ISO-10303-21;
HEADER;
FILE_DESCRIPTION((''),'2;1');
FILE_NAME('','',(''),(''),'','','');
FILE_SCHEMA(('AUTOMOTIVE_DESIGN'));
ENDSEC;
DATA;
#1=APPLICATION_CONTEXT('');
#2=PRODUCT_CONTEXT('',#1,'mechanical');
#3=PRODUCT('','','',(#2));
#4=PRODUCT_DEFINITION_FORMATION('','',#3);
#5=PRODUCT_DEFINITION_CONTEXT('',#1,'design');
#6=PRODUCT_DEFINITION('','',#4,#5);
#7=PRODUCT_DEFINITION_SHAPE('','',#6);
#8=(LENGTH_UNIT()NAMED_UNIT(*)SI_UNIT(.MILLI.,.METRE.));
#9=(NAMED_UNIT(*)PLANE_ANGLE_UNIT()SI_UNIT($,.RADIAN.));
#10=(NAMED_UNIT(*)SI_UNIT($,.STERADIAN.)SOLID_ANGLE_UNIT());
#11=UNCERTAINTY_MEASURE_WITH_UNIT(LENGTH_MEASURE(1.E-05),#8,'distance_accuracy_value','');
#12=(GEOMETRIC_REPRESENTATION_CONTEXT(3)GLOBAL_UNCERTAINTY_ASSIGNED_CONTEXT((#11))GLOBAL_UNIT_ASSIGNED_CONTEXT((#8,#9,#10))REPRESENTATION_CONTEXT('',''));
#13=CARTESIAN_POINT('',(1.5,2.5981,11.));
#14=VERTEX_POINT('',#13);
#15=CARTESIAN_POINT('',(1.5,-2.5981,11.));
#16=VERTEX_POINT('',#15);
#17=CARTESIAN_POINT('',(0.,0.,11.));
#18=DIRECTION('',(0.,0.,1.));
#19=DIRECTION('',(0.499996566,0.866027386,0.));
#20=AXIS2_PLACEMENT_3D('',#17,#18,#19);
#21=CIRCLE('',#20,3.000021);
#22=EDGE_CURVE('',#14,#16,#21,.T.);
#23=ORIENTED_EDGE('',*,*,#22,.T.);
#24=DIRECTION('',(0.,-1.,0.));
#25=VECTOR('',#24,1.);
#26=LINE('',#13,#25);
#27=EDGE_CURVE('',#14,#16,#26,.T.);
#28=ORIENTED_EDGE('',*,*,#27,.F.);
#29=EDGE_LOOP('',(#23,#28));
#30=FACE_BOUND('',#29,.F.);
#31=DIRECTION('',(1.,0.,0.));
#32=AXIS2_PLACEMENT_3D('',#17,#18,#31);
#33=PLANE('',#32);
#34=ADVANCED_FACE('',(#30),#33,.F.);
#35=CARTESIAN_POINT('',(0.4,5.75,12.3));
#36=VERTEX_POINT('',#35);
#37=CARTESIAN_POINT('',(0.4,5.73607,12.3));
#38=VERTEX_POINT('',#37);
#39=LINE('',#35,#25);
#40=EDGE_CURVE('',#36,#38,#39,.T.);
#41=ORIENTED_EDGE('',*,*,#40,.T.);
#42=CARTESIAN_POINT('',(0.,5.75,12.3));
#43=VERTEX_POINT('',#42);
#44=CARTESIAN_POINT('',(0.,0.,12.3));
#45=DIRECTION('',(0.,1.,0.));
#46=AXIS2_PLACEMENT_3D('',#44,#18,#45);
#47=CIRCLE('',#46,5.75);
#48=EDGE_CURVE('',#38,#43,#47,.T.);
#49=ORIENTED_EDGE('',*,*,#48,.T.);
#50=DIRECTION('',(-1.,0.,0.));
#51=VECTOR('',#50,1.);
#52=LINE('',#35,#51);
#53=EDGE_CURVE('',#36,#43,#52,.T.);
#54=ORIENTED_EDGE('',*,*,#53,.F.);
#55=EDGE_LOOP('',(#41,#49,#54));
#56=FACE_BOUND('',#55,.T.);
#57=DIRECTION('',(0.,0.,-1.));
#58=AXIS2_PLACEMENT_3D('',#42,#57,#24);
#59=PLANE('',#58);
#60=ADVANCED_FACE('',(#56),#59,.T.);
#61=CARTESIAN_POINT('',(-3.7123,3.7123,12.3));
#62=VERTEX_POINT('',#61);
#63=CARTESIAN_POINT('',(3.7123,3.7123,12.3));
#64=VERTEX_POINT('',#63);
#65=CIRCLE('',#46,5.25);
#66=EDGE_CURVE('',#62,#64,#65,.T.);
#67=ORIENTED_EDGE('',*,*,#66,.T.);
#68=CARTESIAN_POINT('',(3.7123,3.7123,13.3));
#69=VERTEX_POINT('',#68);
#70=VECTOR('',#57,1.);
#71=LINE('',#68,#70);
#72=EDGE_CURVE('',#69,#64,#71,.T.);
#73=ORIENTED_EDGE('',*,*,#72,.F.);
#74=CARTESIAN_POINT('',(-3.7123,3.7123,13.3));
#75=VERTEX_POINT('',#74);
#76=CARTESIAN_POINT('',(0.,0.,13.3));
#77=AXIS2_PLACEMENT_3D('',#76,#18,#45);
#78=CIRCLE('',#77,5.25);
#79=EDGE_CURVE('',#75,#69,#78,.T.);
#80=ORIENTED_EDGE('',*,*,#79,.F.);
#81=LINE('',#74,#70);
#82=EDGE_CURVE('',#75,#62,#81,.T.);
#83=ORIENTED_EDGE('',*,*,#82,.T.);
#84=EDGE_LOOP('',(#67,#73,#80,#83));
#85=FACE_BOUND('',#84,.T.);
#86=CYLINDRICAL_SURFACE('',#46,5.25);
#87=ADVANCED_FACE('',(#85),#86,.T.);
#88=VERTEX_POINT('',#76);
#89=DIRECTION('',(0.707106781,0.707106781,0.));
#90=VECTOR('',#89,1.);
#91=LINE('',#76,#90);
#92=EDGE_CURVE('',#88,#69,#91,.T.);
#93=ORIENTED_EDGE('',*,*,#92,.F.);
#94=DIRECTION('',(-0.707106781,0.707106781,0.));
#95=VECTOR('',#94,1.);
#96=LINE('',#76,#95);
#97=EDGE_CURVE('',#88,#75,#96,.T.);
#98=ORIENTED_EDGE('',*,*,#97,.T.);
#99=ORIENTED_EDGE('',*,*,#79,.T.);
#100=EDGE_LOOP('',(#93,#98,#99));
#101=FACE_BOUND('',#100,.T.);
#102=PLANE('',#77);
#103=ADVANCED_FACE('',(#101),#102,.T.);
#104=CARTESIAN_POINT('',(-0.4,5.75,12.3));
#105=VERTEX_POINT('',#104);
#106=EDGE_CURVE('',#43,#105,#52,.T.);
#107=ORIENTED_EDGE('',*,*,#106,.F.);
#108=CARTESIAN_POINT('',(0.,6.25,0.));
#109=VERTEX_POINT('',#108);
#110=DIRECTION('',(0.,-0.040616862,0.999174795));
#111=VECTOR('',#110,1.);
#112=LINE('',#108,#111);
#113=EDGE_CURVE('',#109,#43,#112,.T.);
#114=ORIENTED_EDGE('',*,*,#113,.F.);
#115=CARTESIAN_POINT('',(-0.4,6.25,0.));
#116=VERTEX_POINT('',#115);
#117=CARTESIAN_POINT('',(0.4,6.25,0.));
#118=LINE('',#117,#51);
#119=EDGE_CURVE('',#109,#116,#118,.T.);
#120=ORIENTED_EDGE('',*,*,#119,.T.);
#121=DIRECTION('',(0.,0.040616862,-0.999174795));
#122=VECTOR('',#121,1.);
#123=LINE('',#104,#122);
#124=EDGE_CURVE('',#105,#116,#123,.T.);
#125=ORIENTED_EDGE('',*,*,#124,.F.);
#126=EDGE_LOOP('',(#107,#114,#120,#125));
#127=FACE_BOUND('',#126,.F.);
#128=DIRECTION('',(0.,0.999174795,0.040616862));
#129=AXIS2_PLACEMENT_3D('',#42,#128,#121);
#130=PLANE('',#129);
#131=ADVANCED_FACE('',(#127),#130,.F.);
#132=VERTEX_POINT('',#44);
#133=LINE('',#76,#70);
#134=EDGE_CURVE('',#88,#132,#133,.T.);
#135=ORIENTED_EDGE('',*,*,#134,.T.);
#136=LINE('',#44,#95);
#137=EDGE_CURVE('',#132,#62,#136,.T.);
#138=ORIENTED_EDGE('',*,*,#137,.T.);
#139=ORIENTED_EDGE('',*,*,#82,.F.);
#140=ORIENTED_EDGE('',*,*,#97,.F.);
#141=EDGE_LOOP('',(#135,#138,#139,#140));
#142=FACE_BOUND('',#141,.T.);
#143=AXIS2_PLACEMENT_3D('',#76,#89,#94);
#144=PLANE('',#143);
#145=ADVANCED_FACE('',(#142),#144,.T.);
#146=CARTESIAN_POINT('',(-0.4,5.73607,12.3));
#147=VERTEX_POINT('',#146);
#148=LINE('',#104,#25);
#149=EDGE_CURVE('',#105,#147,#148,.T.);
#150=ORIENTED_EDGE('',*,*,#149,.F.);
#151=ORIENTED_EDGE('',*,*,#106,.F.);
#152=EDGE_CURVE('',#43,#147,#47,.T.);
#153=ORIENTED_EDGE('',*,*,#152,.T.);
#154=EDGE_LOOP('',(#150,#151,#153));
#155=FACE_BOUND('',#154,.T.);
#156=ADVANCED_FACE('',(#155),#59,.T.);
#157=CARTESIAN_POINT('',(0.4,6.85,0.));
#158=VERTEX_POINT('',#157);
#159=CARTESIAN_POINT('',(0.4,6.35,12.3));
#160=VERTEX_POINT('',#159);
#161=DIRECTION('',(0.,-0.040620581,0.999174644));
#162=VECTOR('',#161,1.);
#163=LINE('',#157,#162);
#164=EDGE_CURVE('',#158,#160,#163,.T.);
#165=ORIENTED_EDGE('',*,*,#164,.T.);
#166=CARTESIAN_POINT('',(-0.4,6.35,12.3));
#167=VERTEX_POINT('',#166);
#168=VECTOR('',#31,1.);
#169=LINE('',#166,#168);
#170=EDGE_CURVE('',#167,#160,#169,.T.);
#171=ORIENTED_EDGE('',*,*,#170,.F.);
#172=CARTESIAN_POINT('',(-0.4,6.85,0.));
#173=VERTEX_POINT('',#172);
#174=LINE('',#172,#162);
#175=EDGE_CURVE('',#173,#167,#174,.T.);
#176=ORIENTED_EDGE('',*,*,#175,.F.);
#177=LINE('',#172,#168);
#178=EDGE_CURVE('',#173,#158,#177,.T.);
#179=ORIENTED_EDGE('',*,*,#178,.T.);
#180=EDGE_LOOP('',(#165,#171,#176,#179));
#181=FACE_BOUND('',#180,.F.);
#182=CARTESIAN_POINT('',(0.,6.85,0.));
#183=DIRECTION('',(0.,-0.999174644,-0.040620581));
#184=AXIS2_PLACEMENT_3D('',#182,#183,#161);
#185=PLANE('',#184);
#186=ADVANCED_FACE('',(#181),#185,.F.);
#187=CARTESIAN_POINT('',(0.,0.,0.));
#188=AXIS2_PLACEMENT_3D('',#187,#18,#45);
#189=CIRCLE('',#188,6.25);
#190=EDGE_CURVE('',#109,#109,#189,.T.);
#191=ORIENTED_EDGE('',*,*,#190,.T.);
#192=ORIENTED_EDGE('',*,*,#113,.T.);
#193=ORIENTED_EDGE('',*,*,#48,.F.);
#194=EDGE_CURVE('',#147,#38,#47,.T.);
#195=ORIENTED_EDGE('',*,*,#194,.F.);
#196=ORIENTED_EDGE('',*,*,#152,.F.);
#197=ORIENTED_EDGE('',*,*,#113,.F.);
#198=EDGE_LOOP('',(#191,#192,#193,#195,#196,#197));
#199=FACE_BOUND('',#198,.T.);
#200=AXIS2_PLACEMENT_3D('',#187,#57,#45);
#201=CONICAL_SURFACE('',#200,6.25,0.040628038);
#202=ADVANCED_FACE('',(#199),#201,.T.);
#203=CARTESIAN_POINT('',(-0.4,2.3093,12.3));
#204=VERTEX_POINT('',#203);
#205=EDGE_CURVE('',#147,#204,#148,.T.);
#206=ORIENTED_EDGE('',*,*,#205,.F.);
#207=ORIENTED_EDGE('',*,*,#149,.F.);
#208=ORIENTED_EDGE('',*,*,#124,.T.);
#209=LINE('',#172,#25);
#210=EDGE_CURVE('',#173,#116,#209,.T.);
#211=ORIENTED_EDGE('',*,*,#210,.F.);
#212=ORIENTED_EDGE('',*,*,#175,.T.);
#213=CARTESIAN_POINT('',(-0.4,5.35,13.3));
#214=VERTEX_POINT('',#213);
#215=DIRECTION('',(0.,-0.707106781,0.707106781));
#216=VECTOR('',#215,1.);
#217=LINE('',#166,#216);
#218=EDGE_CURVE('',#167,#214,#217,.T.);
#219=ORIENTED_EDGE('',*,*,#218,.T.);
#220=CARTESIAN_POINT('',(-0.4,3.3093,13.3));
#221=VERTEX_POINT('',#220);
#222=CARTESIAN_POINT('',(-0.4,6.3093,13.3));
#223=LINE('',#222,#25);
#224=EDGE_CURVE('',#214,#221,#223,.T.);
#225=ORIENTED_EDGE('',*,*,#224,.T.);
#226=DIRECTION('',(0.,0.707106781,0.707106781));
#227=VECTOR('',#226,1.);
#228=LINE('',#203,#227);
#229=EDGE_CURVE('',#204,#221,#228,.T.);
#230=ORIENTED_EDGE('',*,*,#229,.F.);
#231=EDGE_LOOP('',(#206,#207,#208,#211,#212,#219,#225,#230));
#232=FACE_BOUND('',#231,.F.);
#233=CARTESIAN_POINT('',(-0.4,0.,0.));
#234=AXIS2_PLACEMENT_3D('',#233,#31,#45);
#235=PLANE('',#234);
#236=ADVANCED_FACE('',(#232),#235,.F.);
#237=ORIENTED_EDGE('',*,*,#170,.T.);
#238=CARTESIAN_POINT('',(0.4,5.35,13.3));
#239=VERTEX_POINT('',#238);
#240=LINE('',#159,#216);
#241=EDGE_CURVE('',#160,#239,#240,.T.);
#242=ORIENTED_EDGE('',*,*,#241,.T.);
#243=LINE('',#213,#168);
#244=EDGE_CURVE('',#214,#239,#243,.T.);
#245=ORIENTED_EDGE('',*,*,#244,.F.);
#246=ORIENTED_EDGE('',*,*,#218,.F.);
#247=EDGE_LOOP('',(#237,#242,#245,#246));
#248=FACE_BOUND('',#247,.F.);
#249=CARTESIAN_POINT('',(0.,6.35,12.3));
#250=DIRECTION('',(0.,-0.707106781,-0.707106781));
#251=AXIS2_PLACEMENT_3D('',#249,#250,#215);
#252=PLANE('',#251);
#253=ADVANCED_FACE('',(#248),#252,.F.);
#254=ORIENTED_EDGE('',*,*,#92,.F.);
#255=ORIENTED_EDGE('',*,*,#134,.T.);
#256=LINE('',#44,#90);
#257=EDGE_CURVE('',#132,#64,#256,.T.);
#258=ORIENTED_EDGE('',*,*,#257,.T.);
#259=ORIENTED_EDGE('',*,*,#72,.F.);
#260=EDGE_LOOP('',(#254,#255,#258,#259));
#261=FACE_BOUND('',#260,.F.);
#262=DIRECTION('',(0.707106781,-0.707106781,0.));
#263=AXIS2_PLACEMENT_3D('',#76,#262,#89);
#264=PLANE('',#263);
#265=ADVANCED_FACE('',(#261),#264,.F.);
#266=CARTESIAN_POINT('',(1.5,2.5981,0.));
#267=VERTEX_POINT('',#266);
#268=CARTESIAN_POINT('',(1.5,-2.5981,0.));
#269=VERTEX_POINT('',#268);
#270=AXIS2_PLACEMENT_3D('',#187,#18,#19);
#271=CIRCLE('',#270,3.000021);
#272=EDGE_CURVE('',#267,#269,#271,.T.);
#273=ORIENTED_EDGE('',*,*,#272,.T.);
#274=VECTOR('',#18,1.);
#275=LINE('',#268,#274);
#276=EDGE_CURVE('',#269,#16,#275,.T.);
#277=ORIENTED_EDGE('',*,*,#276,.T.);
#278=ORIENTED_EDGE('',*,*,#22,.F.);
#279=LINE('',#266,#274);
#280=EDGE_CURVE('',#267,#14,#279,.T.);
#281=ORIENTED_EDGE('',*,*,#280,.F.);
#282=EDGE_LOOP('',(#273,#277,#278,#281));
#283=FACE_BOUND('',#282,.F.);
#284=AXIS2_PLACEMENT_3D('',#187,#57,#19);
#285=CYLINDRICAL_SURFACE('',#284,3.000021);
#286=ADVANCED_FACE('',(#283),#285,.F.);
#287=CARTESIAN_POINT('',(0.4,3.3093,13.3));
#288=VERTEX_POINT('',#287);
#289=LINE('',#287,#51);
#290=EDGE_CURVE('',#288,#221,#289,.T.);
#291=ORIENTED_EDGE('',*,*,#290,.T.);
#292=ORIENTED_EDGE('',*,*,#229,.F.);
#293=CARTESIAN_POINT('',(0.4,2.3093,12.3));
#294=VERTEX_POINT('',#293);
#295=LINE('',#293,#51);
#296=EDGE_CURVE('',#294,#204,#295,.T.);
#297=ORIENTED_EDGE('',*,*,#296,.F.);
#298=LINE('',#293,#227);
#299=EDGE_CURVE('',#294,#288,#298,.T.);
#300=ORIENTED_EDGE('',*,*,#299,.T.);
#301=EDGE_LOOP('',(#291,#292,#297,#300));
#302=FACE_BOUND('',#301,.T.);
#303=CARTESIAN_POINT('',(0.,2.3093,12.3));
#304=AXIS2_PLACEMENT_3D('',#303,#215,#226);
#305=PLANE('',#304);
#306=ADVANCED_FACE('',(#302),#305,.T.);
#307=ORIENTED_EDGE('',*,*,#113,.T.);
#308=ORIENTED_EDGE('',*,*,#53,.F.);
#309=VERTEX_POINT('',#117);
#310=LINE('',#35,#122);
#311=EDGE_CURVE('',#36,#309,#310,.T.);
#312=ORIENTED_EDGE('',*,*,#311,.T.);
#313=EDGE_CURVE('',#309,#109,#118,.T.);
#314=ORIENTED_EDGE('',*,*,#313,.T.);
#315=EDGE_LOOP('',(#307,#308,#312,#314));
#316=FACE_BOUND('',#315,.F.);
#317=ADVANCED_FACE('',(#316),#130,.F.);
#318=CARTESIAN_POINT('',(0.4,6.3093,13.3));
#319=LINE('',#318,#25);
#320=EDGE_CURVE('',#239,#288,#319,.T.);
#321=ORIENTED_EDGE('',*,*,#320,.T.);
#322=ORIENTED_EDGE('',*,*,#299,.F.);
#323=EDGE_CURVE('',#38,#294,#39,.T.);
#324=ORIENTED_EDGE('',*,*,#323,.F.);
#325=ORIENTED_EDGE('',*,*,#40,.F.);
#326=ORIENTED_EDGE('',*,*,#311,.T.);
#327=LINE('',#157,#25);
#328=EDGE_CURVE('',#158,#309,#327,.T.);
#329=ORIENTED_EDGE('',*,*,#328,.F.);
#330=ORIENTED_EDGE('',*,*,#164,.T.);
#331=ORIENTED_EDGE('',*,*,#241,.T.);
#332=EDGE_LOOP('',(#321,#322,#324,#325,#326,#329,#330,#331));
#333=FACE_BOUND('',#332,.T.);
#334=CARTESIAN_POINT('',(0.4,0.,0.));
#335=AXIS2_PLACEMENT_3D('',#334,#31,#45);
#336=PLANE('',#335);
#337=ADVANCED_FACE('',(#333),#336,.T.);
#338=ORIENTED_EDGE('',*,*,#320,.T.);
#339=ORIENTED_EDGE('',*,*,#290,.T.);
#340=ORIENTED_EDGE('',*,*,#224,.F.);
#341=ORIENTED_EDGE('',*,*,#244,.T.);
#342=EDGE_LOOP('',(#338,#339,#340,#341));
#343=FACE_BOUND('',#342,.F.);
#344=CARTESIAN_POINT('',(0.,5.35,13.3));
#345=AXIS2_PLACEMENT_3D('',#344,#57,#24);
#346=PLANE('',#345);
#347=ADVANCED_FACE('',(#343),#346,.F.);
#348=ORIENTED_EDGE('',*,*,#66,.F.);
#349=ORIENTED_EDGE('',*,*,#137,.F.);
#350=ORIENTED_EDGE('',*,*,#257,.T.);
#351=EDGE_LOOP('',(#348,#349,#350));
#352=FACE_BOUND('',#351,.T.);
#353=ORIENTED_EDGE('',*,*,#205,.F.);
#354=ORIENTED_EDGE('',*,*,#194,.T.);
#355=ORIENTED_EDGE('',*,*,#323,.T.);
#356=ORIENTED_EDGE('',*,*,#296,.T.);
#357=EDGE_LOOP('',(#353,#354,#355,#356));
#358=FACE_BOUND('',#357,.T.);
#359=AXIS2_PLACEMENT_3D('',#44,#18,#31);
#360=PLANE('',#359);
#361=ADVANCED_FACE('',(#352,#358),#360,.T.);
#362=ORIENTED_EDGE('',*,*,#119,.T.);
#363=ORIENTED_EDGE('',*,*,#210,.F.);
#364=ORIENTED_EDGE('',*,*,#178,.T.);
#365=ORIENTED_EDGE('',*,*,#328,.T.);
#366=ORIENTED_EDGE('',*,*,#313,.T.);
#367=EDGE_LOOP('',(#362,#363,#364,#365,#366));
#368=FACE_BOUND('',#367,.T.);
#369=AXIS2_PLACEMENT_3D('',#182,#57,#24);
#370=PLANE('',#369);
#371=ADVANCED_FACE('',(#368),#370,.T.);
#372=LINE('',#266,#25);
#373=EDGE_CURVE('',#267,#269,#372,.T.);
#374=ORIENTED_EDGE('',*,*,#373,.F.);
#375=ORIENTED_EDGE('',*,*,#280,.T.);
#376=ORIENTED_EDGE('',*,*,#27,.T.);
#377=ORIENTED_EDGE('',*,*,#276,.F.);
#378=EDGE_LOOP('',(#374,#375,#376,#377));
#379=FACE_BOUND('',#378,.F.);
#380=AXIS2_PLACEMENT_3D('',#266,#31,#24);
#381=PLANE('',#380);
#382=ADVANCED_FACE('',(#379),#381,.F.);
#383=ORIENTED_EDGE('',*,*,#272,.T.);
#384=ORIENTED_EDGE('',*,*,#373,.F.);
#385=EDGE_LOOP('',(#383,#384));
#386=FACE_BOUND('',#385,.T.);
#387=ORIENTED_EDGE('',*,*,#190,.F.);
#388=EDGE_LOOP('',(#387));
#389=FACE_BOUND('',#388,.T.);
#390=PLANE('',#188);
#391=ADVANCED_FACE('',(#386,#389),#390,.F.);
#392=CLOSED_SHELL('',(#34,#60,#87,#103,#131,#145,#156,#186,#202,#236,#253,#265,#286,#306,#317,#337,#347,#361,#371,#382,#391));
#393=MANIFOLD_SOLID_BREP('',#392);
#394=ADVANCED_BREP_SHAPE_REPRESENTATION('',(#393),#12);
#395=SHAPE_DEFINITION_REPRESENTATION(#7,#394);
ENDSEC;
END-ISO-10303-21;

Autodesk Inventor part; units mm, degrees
ref_plane "YZ Plane" through (0, 0, 0) normal (1, 0, 0) x (0, 1, 0)
ref_plane "XZ Plane" through (0, 0, 0) normal (0, 1, 0) x (-1, 0, 0)
ref_plane "XY Plane" through (0, 0, 0) normal (0, 0, 1) x (1, 0, 0)
sketch "スケッチ1" plane through (0, 0, 0) normal (1, 0, 0) x (0, 1, 0)
  line L0 (0, 0) -> (6.25, 0)
  line L1 (6.25, 0) -> (5.75, 12.3)
  line L2 (5.75, 12.3) -> (5.25, 12.3)
  line L3 (0, 13.3) -> (0, 0)
  line L4 (0, -2.66) -> (0, 15.96) construction
  line L5 (5.25, 12.3) -> (5.25, 13.3)
  line L6 (5.25, 13.3) -> (0, 13.3)
  dimension "d0" = 12.5
  dimension "d1" = 10.5
  dimension "d2" = 1
  dimension "d3" = 13.3
  dimension "d4" = 11.5
revolve "回転1" add sketch "スケッチ1" angle 360 about axis through (0, 0, -10) along (0, 0, 1)
sketch "スケッチ2" plane through (0, 0, 13.3) normal (0, 0, 1) x (1, 0, 0)
  line L0 (0, -8.75) -> (0, 8.75) construction
  line L1 (0, 0) -> (3.7123, 3.7123)
  circle A0 centre (0, 0) radius 5.25 construction
  line L2 (0, 0) -> (-3.7123, 3.7123)
  arc A1 (3.7123, 3.7123) -> (-3.7123, 3.7123) centre (0, 0) ccw
extrude "押し出し1" cut sketch "スケッチ2" against normal up to surface (1 mm away)
sketch "スケッチ3" plane through (0, 0, 0) normal (1, 0, 0) x (0, 1, 0)
  line L0 (6.85, 0) -> (6.3093, 13.3)
  line L1 (6.3093, 13.3) -> (2.3093, 13.3)
  line L2 (6.25, 0) -> (-6.25, 0) construction
  line L3 (-6.25, 0) -> (-5.75, 12.3) construction
  line L4 (-5.75, 12.3) -> (-5.25, 12.3) construction
  line L5 (-5.25, 12.3) -> (-5.25, 13.3) construction
  line L6 (-5.25, 13.3) -> (0, 13.3) construction
  line L7 (0, 13.3) -> (0, 12.3) construction
  line L8 (0, 12.3) -> (5.75, 12.3) construction
  line L9 (5.75, 12.3) -> (6.25, 0) projected
  line L10 (6.85, 0) -> (6.25, 0)
  line L11 (2.3093, 13.3) -> (2.3093, 12.3)
  line L12 (5.75, 12.3) -> (2.3093, 12.3)
  line L13 (6.35, 12.3) -> (5.35, 13.3)
  line L14 (2.3093, 12.3) -> (3.3093, 13.3)
  point P0 (0, 0)
  dimension "d8" = 1
  dimension "d9" = 13.1
  dimension "d10" = 0.6
  dimension "d11" = 4
  dimension "d14" = 45
extrude "押し出し2" add sketch "スケッチ3" along normal mid plane 0.8 contours L10 L9 L12 L14 L1 L13 L0
sketch "スケッチ4" plane through (0, 0, 0) normal (0, 0, 1) x (1, 0, 0)
  line L0 (1.5, 2.5981) -> (1.5, -2.5981)
  arc A0 (1.5, 2.5981) -> (1.5, -2.5981) centre (0, 0) ccw
  point P0 (-3, 0)
  dimension "d15" = 4.5
  dimension "d16" = 6
extrude "押し出し3" cut sketch "スケッチ4" along normal blind 11
properties part number "knob"
